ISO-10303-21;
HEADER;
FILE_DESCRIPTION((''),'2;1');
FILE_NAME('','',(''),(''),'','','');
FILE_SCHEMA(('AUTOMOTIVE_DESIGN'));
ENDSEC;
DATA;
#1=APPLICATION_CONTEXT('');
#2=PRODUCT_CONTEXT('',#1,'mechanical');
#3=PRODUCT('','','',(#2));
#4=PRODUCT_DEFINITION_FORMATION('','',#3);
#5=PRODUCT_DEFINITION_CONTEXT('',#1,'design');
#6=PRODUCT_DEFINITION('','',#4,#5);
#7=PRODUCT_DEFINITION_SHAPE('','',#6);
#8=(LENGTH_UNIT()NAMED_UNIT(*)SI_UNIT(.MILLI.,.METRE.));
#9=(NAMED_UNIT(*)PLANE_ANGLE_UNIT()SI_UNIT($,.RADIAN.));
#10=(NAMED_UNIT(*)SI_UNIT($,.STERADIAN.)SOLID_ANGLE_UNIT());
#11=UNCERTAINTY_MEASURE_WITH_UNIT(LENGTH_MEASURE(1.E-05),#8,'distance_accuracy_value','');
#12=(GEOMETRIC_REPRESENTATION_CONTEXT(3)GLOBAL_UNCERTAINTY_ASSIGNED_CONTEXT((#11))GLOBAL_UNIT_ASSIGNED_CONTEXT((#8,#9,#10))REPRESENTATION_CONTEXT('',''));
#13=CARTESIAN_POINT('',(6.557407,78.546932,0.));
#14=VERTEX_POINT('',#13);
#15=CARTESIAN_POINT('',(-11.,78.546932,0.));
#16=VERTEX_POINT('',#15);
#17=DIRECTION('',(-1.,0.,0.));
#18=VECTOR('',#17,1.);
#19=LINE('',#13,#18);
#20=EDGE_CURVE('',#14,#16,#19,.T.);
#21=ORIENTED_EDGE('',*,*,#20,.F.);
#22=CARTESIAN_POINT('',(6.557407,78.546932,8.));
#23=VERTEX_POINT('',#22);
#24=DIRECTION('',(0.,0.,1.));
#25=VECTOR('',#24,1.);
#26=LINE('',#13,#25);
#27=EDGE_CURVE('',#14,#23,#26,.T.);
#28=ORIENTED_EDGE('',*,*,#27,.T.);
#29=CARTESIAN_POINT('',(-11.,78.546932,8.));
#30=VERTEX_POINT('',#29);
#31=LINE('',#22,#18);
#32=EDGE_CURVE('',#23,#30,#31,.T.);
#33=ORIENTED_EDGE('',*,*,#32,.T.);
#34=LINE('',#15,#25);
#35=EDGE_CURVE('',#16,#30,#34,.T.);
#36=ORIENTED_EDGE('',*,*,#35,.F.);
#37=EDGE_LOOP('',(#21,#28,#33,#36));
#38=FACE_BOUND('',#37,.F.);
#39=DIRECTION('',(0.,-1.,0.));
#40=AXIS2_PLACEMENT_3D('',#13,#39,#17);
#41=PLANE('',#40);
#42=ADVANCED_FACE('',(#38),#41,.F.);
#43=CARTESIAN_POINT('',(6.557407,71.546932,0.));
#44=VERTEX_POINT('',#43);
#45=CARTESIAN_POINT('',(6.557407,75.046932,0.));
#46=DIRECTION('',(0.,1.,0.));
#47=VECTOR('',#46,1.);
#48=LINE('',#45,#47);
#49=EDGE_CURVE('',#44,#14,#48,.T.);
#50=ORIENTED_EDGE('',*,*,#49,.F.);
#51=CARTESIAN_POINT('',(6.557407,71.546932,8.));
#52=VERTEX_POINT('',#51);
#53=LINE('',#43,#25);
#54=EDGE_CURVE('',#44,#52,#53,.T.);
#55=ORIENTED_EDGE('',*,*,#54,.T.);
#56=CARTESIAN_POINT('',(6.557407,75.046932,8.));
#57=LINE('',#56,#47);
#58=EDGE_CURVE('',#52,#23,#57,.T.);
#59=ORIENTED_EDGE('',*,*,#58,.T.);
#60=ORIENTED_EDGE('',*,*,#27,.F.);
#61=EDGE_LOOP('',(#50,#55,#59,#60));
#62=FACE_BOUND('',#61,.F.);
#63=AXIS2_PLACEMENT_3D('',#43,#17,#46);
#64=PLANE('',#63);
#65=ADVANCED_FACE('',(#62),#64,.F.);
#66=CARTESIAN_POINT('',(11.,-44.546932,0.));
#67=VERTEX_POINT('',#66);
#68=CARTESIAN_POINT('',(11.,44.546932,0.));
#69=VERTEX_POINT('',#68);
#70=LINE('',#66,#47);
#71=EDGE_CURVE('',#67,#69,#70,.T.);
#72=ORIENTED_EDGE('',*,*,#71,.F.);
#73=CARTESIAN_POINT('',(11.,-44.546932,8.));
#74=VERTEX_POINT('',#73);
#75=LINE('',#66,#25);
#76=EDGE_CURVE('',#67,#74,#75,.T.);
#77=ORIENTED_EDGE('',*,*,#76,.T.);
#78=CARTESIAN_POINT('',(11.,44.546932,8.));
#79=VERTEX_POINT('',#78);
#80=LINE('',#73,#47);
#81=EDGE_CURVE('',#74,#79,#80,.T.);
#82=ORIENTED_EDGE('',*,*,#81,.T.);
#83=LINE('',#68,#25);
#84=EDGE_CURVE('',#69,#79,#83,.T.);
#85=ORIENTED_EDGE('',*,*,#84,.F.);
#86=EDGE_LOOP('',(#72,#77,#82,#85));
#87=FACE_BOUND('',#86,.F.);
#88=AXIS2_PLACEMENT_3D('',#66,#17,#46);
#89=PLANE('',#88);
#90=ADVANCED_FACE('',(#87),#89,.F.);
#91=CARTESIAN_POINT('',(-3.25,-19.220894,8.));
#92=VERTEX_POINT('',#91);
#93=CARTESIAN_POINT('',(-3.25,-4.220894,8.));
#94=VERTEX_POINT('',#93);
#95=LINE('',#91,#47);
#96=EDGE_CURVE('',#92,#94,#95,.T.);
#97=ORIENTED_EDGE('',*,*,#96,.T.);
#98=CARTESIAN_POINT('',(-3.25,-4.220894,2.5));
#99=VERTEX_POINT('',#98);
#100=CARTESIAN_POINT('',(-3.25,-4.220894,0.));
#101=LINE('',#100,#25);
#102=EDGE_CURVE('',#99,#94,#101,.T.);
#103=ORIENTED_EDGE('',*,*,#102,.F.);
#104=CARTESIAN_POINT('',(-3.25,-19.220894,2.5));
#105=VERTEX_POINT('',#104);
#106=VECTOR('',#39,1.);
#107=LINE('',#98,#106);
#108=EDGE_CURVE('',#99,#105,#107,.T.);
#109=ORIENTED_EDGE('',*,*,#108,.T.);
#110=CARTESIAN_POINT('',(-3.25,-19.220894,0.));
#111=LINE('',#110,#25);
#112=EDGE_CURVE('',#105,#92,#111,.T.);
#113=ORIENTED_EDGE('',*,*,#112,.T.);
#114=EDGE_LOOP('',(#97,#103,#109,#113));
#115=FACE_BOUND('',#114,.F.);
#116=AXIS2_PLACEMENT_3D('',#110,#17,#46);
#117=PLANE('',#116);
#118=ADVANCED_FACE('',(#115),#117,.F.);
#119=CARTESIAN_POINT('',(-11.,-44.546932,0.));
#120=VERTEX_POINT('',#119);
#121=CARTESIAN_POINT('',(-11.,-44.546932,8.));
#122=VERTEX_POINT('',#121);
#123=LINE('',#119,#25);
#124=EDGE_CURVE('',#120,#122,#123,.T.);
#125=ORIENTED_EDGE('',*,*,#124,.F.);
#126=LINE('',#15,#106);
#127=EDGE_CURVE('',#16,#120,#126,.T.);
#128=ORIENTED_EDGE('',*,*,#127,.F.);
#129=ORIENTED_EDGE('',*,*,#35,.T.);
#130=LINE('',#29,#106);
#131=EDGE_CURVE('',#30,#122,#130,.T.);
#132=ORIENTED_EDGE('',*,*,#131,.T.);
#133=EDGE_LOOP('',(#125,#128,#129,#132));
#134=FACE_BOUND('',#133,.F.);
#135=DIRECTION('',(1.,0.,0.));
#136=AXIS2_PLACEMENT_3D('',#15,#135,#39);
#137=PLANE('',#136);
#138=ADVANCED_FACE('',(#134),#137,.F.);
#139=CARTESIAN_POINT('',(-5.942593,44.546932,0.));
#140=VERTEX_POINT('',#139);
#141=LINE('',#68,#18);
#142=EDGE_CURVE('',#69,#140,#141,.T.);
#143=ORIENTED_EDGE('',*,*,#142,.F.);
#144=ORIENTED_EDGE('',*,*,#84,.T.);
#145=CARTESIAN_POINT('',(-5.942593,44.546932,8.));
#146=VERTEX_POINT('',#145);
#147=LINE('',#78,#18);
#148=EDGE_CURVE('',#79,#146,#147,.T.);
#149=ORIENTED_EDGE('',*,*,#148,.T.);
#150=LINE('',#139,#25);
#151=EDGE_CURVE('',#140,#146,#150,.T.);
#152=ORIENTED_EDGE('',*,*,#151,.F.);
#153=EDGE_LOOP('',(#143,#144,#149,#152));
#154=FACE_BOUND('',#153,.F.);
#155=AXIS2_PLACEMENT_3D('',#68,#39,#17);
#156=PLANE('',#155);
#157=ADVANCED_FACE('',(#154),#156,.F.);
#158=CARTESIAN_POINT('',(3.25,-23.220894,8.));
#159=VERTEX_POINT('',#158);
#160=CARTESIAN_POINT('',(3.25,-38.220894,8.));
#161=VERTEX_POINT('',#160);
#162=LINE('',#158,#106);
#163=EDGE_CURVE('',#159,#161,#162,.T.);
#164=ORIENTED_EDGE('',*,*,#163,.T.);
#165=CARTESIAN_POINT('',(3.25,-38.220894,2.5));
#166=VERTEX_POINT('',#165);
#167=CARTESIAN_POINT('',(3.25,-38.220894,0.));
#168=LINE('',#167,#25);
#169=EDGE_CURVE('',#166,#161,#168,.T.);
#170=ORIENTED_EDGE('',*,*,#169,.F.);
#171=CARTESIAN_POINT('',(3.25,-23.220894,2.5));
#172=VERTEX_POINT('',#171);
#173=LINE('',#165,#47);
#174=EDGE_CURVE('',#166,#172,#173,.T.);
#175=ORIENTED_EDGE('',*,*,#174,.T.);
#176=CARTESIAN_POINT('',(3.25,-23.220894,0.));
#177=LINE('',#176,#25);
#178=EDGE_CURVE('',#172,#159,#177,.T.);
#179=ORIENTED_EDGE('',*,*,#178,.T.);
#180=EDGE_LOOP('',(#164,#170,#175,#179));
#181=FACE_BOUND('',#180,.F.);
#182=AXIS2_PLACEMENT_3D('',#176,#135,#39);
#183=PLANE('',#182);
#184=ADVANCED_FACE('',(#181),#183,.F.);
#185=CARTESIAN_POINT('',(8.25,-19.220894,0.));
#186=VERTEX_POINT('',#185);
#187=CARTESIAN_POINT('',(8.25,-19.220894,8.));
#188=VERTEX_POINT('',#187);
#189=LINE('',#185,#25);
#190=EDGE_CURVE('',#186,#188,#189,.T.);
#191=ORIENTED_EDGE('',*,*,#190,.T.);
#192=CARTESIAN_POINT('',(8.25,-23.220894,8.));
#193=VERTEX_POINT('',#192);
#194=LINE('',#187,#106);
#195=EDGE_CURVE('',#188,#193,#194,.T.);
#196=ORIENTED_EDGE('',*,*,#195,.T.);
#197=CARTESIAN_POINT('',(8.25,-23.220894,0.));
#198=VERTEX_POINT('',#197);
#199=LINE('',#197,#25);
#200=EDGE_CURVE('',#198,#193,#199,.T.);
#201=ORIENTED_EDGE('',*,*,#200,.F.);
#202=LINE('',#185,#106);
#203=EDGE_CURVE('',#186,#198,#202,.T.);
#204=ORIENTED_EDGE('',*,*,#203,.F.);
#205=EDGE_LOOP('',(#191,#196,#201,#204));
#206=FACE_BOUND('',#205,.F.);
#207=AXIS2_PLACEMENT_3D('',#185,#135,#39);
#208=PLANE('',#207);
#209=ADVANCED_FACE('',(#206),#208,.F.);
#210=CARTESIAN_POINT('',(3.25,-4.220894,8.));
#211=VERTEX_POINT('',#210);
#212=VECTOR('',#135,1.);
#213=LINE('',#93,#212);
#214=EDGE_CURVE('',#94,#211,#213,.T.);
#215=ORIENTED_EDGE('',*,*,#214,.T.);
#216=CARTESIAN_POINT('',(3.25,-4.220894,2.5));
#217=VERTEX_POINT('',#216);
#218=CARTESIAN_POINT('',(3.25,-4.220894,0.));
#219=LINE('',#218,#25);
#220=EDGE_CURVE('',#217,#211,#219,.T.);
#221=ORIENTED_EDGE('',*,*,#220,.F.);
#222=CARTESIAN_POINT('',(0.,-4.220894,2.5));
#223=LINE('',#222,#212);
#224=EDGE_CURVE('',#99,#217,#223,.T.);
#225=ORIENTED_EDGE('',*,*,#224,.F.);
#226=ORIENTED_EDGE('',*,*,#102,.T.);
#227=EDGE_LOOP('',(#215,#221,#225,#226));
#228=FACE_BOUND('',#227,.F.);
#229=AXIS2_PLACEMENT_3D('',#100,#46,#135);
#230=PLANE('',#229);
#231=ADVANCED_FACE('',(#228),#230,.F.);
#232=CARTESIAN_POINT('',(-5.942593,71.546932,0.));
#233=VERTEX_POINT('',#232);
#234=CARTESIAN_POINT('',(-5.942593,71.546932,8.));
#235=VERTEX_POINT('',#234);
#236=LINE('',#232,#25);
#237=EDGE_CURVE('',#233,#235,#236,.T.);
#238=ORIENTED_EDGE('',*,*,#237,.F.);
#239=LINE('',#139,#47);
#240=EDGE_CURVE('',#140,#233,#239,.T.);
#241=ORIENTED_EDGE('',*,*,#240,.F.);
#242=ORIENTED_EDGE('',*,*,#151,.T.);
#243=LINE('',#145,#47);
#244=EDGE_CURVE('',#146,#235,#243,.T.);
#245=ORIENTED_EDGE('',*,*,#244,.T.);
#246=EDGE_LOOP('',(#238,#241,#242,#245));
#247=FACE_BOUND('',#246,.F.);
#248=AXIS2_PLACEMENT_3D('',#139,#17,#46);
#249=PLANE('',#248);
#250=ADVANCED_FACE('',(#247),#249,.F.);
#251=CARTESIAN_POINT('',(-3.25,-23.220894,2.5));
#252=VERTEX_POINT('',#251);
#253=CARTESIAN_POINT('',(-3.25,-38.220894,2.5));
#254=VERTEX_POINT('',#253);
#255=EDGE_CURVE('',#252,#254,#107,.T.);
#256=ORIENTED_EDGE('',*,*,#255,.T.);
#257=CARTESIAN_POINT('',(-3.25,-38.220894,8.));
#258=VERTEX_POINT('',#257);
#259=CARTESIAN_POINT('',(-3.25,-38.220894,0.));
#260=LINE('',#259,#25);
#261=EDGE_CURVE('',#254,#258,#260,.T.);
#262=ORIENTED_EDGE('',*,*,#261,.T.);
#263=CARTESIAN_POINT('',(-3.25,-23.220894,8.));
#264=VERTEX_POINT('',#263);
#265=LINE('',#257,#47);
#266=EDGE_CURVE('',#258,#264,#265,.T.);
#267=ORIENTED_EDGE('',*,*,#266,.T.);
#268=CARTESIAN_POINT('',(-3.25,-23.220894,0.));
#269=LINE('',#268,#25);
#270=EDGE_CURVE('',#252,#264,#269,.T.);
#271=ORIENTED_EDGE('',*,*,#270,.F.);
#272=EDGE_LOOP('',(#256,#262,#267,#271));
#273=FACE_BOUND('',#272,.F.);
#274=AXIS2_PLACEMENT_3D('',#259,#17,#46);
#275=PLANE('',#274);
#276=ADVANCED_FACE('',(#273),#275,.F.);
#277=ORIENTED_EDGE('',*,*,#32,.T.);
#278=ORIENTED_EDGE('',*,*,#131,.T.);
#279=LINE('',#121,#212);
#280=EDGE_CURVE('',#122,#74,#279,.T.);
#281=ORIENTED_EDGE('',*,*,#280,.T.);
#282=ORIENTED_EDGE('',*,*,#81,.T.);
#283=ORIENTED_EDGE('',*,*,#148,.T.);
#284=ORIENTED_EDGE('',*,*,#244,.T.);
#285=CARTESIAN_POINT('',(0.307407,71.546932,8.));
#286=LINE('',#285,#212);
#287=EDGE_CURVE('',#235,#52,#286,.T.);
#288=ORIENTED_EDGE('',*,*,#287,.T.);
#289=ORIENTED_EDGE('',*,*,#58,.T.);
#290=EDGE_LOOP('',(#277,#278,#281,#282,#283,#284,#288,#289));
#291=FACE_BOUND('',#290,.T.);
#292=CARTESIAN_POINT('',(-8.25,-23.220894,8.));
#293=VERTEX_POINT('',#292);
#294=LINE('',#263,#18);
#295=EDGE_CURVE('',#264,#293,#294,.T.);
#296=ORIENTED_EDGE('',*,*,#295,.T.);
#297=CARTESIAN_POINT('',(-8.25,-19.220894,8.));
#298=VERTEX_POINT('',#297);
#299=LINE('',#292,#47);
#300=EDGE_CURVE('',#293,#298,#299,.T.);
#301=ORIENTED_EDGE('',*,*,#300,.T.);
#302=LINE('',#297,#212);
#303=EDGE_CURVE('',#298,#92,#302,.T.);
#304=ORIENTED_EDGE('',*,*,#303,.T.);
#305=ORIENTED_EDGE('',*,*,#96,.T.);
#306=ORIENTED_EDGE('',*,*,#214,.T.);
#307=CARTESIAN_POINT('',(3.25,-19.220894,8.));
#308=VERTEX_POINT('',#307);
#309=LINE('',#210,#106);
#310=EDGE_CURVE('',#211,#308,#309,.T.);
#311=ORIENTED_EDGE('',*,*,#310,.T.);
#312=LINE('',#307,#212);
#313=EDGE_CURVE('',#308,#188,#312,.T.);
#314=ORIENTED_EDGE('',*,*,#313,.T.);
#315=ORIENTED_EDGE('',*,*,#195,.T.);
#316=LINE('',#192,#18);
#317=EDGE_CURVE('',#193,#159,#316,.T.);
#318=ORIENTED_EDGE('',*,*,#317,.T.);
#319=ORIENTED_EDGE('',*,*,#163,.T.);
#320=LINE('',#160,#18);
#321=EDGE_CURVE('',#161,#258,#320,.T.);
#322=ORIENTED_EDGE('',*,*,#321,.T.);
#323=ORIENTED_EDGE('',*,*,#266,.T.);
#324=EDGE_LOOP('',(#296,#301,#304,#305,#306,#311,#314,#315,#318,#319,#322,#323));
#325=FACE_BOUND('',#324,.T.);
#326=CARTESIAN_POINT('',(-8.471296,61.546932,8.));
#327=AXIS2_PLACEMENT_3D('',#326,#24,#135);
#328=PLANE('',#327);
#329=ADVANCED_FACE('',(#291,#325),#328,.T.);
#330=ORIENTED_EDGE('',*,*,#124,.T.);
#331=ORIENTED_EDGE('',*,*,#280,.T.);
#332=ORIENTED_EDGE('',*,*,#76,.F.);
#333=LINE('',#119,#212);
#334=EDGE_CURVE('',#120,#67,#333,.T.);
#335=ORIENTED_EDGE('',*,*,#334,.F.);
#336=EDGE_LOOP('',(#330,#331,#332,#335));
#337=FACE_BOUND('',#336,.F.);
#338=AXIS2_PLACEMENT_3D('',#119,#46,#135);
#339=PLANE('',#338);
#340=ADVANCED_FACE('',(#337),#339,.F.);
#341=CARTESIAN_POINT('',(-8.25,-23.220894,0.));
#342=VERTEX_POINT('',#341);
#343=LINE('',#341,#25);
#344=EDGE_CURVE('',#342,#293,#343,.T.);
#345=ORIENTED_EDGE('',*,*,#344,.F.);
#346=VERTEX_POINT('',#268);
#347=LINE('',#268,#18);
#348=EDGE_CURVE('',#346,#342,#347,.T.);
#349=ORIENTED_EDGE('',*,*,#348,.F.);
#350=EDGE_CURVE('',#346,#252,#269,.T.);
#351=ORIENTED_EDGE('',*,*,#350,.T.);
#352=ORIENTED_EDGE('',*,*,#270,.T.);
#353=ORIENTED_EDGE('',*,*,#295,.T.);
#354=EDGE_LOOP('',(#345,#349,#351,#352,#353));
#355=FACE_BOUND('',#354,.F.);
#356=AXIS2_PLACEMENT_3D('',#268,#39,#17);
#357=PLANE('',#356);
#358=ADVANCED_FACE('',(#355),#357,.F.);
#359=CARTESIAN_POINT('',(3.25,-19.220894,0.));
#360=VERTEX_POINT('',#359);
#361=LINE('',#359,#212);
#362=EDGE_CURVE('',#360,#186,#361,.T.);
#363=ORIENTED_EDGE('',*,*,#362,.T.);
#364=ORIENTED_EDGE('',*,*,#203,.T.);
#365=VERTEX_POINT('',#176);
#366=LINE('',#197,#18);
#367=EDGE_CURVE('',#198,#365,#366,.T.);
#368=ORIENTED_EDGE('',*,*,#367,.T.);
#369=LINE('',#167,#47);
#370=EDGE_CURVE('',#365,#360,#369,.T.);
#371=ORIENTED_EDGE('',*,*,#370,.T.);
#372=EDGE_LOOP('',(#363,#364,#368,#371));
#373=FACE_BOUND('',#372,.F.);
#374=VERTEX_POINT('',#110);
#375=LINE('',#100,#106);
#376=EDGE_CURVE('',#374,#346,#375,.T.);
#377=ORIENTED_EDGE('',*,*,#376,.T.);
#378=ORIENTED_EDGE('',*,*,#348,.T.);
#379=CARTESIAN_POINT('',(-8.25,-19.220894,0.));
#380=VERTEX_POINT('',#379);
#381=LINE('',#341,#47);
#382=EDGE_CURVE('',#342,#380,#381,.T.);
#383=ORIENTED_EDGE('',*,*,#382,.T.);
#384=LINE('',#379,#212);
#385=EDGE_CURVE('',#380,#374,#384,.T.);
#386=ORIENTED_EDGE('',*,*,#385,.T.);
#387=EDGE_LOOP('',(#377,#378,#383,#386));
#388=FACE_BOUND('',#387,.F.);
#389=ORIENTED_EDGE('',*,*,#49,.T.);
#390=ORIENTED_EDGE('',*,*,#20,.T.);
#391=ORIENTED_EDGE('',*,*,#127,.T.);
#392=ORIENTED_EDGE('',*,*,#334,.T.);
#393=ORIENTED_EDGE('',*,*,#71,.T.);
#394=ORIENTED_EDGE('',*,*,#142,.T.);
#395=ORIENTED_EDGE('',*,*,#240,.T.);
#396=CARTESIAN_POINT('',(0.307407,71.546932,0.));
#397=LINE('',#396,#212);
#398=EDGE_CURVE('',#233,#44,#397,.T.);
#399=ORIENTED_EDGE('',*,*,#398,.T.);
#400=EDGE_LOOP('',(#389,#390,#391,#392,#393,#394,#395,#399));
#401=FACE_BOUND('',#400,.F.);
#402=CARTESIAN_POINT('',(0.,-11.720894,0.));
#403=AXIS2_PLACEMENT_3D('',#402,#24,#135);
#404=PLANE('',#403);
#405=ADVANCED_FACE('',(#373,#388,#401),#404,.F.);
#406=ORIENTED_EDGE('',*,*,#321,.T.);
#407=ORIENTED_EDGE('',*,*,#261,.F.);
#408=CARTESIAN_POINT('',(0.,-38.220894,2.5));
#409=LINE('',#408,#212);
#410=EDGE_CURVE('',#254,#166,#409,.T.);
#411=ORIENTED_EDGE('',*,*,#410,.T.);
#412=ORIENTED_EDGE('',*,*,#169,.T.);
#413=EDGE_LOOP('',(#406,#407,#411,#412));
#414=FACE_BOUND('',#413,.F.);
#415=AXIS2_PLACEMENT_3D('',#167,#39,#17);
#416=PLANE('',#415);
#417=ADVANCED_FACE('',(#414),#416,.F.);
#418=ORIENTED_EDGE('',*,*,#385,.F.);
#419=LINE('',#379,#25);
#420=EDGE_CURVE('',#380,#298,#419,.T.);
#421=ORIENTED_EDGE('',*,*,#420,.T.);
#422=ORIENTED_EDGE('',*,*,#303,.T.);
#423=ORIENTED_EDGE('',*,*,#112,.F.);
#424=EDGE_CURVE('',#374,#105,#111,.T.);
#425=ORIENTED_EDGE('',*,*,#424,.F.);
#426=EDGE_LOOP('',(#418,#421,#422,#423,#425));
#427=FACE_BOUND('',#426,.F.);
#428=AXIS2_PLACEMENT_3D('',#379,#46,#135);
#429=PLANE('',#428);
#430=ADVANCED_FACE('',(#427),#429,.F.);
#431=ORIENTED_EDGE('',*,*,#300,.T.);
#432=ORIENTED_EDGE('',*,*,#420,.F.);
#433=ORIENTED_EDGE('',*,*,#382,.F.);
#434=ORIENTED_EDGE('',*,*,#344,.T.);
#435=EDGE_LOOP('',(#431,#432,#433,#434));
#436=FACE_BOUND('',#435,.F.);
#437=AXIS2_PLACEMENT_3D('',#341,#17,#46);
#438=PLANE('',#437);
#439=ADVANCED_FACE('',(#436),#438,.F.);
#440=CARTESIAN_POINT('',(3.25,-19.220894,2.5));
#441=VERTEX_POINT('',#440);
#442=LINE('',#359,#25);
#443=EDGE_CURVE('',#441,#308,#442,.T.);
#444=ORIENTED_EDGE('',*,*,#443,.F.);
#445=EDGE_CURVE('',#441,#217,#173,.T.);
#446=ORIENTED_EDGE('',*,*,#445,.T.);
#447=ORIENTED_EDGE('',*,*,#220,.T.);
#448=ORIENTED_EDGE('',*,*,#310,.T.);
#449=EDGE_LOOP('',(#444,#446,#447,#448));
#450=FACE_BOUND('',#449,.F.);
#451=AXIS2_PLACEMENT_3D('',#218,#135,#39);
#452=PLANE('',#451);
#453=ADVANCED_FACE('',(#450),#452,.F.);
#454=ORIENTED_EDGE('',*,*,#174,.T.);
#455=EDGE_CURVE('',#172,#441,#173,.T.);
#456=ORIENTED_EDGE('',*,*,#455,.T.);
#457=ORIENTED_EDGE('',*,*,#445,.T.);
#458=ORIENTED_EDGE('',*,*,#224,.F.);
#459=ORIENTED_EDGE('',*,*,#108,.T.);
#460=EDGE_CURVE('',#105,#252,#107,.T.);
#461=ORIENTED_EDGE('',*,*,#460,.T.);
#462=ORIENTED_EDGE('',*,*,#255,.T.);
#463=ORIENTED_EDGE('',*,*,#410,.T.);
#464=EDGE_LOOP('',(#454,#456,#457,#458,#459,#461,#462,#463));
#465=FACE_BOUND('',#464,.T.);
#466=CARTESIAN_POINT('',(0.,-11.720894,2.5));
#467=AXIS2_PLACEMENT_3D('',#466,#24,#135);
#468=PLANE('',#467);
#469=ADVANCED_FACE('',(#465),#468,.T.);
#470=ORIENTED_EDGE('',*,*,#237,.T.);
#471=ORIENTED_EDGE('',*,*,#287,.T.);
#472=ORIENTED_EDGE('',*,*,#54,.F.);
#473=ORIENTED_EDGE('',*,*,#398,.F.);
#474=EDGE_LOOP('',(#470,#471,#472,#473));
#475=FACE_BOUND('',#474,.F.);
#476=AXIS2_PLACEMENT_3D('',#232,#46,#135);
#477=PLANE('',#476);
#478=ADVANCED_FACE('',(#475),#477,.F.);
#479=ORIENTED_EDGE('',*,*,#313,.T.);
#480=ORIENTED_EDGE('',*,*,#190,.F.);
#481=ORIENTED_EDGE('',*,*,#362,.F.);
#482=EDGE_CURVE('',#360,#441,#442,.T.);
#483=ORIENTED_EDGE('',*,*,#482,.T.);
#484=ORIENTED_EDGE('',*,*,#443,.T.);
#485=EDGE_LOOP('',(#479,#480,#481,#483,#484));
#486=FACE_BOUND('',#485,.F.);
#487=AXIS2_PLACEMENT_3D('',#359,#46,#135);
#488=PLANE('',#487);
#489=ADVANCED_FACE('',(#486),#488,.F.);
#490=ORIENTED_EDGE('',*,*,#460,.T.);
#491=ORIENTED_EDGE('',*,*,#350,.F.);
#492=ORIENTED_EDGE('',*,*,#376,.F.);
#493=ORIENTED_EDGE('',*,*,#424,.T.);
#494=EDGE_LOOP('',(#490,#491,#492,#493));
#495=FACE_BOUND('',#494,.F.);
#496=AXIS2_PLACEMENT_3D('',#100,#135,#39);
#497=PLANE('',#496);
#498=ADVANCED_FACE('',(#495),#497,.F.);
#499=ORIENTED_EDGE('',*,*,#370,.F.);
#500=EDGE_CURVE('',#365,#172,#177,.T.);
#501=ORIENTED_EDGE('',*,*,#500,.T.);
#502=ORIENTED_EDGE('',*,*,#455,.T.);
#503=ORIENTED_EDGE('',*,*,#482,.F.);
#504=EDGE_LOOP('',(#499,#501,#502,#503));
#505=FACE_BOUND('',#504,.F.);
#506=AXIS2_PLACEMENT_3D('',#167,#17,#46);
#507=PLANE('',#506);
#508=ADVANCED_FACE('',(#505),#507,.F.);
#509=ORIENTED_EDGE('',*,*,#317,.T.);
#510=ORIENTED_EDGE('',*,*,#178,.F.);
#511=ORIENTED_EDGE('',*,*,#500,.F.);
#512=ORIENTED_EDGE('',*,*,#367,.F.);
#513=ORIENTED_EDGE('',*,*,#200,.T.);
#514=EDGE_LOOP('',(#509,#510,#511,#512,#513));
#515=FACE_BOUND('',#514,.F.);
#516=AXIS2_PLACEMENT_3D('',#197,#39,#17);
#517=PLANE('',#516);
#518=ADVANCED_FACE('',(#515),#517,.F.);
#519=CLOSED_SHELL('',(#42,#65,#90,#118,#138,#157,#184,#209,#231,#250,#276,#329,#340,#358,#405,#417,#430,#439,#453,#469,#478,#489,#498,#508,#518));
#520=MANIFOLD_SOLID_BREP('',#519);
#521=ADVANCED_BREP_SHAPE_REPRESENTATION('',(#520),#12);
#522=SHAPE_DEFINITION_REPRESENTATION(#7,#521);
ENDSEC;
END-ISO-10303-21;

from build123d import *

# Parameters (mm, degrees)
F0_W     = 12.5
F0_H     = 7
F1_DEPTH = 8
F0_W_2   = 6.5
F0_H_2   = 15
F0_H_3   = 4
F2_DEPTH = 2.5


# Not quite as in the source:
# - a feature names something its author has since deleted; it is built from what else it names


with BuildPart() as f1:
    # F0 (on Top) → F1 (new body)
    with BuildSketch(Plane.XY):
        Polygon((-6.0006843501, 44.5469320043), (-5.9425927878, 44.5469320043), (-5.9425927878, 71.5469320043), (-5.9425927878, 78.5469320043), (-11, 78.5469320043), (-11, 44.5469320043), align=None)
        Polygon((11, -44.5469320043), (11, 44.5469320043), (1.4993156499, 44.5469320043), (-5.9425927878, 44.5469320043), (-6.0006843501, 44.5469320043), (-11, 44.5469320043), (-11, -44.5469320043), align=None)
        Polygon((-3.25, -4.2208939195), (3.25, -4.2208939195), (3.25, -19.2208939195), (8.25, -19.2208939195), (8.25, -23.2208939195), (3.25, -23.2208939195), (3.25, -38.2208939195), (-3.25, -38.2208939195), (-3.25, -23.2208939195), (-8.25, -23.2208939195), (-8.25, -19.2208939195), (-3.25, -19.2208939195), align=None, mode=Mode.SUBTRACT)
        with Locations((0.3074072122, 75.0469320043)):
            Rectangle(F0_W, F0_H)
    extrude(amount=F1_DEPTH)

    # F0 (on Top) → F2 (join)
    with BuildSketch(Plane.XY):
        with Locations((0, -11.7208939195)):
            Rectangle(F0_W_2, F0_H_2)
        with Locations((0, -21.2208939195)):
            Rectangle(F0_W_2, F0_H_3)
        with Locations((0, -30.7208939195)):
            Rectangle(F0_W_2, F0_H_2)
    extrude(amount=F2_DEPTH)


solid = f1.part
